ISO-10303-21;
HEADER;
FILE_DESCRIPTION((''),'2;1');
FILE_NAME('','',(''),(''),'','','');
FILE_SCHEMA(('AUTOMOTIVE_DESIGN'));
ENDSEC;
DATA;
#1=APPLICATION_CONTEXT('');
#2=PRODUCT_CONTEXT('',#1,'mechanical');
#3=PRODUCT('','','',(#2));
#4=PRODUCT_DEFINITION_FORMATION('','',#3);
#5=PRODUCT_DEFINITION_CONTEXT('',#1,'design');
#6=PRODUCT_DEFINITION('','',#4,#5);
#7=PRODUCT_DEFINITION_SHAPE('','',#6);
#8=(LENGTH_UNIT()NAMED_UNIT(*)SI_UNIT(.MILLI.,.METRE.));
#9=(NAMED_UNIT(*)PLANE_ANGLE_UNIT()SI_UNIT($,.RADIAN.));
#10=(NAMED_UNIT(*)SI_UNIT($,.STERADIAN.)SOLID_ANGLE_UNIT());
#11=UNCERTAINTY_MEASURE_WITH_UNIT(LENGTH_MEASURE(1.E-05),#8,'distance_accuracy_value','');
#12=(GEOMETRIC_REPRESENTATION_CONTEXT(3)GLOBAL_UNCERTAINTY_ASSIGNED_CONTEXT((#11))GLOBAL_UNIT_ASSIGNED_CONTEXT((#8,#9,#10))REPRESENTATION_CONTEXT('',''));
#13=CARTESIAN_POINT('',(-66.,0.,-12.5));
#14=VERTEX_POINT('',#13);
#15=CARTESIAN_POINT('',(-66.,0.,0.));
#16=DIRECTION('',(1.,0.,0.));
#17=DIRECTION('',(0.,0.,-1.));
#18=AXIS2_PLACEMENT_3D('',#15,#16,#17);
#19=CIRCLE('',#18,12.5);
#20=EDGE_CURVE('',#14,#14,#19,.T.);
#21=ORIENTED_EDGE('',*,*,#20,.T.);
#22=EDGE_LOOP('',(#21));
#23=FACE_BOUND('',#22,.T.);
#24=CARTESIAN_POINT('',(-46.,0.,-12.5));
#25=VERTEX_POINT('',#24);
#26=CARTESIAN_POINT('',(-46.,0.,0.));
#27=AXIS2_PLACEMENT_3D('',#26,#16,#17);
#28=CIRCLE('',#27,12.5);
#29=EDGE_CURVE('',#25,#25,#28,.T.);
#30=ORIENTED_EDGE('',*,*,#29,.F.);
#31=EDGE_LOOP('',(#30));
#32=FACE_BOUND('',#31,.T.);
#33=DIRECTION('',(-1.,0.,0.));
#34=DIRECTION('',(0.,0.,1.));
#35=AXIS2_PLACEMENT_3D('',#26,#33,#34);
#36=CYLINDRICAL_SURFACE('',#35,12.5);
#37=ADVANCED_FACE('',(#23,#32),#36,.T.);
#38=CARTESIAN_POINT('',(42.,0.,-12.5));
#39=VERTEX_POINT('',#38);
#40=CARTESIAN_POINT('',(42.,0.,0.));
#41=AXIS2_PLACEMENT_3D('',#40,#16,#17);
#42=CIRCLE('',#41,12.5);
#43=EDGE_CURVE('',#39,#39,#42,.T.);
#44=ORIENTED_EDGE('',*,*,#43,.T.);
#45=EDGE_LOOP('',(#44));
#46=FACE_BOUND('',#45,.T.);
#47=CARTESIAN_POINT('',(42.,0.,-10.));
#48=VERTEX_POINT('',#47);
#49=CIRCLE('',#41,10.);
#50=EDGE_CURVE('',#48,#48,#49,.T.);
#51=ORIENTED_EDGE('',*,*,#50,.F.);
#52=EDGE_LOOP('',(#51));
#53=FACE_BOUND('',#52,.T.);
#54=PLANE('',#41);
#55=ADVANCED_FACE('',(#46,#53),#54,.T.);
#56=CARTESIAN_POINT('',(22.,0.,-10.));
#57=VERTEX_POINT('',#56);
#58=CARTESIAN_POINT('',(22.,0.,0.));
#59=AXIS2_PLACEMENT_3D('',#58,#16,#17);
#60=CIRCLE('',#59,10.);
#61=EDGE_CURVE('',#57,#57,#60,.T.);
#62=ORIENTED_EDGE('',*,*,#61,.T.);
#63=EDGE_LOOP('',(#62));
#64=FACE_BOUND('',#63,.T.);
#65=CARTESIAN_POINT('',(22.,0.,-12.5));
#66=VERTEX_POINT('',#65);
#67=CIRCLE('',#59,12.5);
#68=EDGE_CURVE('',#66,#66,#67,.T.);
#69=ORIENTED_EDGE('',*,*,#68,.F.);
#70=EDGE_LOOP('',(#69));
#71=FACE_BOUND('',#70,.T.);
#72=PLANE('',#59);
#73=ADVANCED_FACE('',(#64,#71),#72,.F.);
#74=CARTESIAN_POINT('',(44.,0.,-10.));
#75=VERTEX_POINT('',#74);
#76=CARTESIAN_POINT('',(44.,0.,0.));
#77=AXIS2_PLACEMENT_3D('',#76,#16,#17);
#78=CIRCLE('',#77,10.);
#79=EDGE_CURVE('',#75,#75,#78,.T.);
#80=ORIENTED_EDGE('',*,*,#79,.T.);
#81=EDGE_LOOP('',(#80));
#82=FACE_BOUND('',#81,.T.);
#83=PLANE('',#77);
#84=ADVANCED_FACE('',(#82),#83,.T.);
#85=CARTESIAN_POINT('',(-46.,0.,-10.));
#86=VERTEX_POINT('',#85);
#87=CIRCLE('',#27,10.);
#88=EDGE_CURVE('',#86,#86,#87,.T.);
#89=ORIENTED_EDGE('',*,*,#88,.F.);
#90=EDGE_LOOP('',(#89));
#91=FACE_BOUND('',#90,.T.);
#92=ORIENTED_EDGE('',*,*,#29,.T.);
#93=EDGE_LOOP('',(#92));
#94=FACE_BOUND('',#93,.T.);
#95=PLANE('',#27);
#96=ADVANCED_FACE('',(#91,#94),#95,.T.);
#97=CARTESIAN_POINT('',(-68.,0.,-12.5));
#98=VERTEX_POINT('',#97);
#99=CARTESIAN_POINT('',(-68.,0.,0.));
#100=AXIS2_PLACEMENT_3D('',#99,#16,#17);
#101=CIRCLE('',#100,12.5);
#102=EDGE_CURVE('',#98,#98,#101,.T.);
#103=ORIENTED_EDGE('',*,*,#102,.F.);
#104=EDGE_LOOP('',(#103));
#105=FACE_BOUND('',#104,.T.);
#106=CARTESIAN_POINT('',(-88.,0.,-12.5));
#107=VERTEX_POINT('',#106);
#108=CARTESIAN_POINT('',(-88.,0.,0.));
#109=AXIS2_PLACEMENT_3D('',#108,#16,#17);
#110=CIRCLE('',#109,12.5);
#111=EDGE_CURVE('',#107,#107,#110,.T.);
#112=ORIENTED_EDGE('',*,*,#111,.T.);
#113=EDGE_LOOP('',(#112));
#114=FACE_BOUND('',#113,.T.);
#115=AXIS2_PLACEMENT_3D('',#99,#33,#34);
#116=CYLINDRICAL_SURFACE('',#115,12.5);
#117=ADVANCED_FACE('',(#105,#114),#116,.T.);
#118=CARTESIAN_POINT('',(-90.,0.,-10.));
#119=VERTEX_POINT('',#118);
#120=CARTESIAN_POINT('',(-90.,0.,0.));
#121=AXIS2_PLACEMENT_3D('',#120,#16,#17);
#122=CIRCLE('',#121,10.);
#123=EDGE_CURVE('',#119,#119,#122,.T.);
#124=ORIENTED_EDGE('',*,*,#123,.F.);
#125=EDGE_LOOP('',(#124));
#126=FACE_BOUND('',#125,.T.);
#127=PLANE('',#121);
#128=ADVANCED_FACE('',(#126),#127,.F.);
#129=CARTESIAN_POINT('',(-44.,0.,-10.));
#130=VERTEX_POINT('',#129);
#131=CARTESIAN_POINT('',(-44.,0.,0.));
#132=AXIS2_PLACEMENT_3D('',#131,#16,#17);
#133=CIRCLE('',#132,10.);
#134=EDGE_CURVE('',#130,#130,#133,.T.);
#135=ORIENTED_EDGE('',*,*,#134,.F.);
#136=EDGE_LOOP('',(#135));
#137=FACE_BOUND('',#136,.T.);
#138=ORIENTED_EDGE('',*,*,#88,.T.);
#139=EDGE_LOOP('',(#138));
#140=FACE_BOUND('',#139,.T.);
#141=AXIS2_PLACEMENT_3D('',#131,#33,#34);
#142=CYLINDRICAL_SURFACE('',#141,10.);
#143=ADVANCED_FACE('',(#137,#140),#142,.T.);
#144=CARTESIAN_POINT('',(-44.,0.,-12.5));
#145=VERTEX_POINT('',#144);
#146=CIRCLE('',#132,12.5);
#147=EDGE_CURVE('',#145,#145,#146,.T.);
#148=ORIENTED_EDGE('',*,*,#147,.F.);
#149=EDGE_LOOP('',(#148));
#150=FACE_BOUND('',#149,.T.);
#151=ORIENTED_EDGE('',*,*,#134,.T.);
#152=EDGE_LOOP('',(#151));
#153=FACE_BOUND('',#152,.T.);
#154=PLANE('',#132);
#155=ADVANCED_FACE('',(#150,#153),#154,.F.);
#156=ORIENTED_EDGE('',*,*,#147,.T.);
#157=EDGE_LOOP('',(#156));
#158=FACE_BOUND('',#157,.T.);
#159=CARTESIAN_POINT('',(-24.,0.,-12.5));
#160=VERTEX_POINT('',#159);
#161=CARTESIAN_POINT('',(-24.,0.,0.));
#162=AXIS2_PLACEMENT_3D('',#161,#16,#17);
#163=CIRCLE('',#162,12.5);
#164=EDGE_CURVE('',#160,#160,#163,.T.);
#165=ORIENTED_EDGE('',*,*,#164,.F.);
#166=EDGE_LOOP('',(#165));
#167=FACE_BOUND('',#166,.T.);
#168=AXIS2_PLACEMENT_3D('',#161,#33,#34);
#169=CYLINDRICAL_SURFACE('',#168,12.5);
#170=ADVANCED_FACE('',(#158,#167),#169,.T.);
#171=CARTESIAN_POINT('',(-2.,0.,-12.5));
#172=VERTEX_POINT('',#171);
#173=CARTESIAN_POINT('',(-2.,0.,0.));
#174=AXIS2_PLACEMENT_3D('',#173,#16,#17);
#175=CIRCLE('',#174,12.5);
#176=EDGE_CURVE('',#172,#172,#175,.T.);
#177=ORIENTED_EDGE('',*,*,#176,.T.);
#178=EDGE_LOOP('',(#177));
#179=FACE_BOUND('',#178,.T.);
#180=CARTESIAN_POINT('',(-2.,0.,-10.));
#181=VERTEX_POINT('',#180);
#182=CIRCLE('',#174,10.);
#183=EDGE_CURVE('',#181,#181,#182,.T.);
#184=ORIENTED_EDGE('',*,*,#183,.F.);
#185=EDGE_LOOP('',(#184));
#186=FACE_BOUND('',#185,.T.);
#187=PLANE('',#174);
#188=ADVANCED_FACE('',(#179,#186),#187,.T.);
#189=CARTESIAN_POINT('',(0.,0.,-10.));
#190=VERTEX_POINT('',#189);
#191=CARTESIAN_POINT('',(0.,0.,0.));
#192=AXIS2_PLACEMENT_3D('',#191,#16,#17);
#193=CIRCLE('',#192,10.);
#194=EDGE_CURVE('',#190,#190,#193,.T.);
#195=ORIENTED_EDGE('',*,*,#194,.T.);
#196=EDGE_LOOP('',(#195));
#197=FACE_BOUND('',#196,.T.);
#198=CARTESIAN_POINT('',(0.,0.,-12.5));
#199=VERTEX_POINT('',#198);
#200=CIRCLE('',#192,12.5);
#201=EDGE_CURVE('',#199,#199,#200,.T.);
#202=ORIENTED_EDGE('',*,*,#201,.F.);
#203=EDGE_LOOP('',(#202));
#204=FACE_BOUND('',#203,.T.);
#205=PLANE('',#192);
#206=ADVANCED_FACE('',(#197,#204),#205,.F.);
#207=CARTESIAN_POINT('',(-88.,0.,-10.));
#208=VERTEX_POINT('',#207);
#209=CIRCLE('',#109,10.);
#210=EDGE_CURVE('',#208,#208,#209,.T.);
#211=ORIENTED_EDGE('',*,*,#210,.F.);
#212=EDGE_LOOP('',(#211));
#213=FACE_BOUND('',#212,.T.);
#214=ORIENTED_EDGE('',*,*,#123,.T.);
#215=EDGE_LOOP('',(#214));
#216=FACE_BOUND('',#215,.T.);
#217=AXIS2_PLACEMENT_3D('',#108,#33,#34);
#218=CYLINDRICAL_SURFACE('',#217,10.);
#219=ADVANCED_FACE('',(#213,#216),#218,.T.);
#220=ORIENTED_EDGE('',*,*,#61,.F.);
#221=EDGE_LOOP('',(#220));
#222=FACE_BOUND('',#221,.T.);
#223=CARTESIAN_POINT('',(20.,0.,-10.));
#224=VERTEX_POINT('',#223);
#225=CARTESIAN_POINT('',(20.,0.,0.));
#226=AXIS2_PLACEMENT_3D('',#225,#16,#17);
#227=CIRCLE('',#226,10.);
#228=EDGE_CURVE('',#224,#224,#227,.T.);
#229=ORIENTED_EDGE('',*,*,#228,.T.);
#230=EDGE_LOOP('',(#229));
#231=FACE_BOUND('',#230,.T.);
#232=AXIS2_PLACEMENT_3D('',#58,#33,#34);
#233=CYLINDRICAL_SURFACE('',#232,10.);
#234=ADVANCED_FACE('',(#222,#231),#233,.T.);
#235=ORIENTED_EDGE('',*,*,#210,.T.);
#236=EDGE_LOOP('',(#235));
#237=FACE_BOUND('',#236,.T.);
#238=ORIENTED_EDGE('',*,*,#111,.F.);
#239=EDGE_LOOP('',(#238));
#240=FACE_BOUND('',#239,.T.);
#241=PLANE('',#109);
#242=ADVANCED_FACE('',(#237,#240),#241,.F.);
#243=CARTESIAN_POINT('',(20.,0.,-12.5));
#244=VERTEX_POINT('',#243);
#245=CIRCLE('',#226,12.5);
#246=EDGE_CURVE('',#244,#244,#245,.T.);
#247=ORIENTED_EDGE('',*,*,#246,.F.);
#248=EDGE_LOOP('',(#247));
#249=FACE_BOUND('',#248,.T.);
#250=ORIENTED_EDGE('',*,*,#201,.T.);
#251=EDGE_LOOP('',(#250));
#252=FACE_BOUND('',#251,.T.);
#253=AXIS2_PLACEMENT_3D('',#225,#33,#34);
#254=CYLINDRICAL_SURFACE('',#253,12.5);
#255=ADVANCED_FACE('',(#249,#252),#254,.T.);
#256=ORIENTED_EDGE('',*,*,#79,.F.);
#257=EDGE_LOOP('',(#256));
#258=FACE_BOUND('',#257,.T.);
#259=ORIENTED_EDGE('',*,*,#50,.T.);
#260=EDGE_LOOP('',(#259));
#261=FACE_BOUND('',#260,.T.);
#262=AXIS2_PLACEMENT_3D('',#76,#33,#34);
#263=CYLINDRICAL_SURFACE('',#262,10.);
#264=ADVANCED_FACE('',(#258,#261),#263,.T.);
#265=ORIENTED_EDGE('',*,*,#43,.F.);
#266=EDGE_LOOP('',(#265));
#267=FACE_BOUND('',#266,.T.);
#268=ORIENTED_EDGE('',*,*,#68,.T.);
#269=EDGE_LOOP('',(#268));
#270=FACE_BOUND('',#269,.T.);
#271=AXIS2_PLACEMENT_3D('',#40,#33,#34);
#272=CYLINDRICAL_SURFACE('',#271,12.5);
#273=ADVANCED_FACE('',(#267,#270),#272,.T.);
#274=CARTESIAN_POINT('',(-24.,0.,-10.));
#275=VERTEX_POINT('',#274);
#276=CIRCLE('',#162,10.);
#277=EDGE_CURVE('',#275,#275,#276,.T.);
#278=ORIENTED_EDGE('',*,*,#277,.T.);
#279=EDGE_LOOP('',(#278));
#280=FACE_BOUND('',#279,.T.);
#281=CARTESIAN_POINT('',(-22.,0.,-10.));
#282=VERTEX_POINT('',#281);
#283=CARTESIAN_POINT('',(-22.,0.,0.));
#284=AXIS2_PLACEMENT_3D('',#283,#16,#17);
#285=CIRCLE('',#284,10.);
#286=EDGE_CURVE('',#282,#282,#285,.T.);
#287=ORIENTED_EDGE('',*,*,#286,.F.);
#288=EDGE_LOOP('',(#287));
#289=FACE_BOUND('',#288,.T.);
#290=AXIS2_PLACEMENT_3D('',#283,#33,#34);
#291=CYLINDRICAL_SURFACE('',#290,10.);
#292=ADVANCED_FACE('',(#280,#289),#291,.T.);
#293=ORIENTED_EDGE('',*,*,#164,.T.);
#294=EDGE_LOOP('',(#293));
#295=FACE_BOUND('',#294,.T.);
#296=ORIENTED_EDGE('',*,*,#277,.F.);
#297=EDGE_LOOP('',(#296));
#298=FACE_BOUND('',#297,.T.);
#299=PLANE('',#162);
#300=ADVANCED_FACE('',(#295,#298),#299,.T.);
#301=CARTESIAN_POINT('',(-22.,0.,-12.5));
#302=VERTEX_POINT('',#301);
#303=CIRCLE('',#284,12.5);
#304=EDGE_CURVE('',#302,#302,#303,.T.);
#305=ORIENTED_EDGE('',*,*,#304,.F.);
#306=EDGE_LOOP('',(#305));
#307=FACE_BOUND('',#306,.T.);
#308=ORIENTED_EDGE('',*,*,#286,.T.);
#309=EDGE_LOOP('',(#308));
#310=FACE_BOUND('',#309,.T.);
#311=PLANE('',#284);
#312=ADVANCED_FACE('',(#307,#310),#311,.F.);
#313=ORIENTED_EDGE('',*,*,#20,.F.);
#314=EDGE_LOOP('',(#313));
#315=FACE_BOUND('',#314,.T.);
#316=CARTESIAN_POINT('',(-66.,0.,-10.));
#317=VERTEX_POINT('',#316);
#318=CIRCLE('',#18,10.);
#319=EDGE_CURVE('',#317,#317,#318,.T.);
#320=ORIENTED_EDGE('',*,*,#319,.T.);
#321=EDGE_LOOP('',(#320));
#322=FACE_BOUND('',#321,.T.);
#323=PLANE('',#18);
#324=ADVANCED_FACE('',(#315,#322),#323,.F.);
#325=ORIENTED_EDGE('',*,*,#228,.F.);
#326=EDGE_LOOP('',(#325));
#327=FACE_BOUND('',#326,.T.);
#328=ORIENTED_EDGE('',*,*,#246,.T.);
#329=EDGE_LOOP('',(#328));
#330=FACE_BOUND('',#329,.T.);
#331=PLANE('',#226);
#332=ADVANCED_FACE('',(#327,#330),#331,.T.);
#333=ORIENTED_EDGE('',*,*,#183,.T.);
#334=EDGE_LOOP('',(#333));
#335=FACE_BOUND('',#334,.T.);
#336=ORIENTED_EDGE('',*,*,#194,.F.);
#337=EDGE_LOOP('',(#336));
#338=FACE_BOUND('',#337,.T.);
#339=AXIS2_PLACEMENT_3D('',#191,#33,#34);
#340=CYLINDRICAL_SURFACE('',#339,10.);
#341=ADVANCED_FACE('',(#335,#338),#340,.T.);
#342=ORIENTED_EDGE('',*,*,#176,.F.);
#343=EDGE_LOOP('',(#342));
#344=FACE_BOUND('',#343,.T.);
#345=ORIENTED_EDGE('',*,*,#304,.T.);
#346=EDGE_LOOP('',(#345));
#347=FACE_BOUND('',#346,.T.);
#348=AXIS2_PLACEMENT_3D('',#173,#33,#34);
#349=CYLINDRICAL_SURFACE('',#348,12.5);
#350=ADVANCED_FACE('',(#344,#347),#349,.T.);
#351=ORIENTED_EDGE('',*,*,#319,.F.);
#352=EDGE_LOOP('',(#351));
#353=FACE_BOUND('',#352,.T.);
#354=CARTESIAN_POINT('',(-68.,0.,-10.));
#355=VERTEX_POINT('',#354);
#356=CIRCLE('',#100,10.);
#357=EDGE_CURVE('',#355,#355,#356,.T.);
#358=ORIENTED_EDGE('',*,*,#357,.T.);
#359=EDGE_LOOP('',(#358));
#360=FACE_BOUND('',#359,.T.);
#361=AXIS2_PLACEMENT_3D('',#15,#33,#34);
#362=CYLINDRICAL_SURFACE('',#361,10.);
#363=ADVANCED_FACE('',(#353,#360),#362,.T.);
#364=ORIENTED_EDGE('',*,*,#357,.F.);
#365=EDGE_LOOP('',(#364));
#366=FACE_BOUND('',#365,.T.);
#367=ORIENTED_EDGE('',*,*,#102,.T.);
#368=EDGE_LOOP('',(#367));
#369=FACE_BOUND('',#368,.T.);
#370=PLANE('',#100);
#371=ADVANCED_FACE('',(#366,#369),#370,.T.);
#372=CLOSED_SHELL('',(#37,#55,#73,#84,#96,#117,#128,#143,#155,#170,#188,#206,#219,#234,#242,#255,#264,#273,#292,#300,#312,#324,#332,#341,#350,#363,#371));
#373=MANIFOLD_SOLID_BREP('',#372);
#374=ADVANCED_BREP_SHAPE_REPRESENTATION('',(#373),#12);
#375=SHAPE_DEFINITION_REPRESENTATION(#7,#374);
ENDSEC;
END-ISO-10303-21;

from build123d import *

# Parameters (mm, degrees)
SKETCH1_R             = 12.5
BOSS_EXTRUDE1_DEPTH   = 20
SKETCH2_R             = 10
BOSS_EXTRUDE2_DEPTH   = 2
LPATTERN4_START       = 22
LPATTERN4_OUTLINE_R   = 12.5
LPATTERN4_DEPTH       = 20
LPATTERN4_START_2     = -2
LPATTERN4_2_OUTLINE_R = 10
LPATTERN4_2_DEPTH     = 46
LPATTERN5_COUNT       = 5
LPATTERN5_PITCH       = 22


# Read off the part's stored shape, not the designer's step: LPattern4
with BuildPart() as part:
    # Sketch1 → Boss-Extrude1 (new body)
    with BuildSketch(Plane(origin=(0, 0, 0), x_dir=(0, 0, -1), z_dir=(1, 0, 0))):
        Circle(SKETCH1_R)
    boss_extrude1 = extrude(amount=BOSS_EXTRUDE1_DEPTH)

    # Sketch2 → Boss-Extrude2 (add)
    with BuildSketch(Plane(origin=(20, 0, 0), x_dir=(0, 0, -1), z_dir=(1, 0, 0))):
        Circle(SKETCH2_R)
    extrude(amount=BOSS_EXTRUDE2_DEPTH)

    # LPattern4 outline → LPattern4 (add)
    with BuildSketch(Plane.YZ.offset(LPATTERN4_START)):
        Circle(LPATTERN4_OUTLINE_R)
    lpattern4 = extrude(amount=LPATTERN4_DEPTH)

    # LPattern4 2 outline → LPattern4 2 (add)
    with BuildSketch(Plane.YZ.offset(LPATTERN4_START_2)):
        Circle(LPATTERN4_2_OUTLINE_R)
    lpattern4_2 = extrude(amount=LPATTERN4_2_DEPTH)

    # LPattern5: Boss-Extrude1, LPattern4, LPattern4 2 ×5
    with Locations(*[(-i * LPATTERN5_PITCH, 0, 0) for i in range(1, LPATTERN5_COUNT)]):
        add(boss_extrude1)
        add(lpattern4)
        add(lpattern4_2)


solid = part.part
